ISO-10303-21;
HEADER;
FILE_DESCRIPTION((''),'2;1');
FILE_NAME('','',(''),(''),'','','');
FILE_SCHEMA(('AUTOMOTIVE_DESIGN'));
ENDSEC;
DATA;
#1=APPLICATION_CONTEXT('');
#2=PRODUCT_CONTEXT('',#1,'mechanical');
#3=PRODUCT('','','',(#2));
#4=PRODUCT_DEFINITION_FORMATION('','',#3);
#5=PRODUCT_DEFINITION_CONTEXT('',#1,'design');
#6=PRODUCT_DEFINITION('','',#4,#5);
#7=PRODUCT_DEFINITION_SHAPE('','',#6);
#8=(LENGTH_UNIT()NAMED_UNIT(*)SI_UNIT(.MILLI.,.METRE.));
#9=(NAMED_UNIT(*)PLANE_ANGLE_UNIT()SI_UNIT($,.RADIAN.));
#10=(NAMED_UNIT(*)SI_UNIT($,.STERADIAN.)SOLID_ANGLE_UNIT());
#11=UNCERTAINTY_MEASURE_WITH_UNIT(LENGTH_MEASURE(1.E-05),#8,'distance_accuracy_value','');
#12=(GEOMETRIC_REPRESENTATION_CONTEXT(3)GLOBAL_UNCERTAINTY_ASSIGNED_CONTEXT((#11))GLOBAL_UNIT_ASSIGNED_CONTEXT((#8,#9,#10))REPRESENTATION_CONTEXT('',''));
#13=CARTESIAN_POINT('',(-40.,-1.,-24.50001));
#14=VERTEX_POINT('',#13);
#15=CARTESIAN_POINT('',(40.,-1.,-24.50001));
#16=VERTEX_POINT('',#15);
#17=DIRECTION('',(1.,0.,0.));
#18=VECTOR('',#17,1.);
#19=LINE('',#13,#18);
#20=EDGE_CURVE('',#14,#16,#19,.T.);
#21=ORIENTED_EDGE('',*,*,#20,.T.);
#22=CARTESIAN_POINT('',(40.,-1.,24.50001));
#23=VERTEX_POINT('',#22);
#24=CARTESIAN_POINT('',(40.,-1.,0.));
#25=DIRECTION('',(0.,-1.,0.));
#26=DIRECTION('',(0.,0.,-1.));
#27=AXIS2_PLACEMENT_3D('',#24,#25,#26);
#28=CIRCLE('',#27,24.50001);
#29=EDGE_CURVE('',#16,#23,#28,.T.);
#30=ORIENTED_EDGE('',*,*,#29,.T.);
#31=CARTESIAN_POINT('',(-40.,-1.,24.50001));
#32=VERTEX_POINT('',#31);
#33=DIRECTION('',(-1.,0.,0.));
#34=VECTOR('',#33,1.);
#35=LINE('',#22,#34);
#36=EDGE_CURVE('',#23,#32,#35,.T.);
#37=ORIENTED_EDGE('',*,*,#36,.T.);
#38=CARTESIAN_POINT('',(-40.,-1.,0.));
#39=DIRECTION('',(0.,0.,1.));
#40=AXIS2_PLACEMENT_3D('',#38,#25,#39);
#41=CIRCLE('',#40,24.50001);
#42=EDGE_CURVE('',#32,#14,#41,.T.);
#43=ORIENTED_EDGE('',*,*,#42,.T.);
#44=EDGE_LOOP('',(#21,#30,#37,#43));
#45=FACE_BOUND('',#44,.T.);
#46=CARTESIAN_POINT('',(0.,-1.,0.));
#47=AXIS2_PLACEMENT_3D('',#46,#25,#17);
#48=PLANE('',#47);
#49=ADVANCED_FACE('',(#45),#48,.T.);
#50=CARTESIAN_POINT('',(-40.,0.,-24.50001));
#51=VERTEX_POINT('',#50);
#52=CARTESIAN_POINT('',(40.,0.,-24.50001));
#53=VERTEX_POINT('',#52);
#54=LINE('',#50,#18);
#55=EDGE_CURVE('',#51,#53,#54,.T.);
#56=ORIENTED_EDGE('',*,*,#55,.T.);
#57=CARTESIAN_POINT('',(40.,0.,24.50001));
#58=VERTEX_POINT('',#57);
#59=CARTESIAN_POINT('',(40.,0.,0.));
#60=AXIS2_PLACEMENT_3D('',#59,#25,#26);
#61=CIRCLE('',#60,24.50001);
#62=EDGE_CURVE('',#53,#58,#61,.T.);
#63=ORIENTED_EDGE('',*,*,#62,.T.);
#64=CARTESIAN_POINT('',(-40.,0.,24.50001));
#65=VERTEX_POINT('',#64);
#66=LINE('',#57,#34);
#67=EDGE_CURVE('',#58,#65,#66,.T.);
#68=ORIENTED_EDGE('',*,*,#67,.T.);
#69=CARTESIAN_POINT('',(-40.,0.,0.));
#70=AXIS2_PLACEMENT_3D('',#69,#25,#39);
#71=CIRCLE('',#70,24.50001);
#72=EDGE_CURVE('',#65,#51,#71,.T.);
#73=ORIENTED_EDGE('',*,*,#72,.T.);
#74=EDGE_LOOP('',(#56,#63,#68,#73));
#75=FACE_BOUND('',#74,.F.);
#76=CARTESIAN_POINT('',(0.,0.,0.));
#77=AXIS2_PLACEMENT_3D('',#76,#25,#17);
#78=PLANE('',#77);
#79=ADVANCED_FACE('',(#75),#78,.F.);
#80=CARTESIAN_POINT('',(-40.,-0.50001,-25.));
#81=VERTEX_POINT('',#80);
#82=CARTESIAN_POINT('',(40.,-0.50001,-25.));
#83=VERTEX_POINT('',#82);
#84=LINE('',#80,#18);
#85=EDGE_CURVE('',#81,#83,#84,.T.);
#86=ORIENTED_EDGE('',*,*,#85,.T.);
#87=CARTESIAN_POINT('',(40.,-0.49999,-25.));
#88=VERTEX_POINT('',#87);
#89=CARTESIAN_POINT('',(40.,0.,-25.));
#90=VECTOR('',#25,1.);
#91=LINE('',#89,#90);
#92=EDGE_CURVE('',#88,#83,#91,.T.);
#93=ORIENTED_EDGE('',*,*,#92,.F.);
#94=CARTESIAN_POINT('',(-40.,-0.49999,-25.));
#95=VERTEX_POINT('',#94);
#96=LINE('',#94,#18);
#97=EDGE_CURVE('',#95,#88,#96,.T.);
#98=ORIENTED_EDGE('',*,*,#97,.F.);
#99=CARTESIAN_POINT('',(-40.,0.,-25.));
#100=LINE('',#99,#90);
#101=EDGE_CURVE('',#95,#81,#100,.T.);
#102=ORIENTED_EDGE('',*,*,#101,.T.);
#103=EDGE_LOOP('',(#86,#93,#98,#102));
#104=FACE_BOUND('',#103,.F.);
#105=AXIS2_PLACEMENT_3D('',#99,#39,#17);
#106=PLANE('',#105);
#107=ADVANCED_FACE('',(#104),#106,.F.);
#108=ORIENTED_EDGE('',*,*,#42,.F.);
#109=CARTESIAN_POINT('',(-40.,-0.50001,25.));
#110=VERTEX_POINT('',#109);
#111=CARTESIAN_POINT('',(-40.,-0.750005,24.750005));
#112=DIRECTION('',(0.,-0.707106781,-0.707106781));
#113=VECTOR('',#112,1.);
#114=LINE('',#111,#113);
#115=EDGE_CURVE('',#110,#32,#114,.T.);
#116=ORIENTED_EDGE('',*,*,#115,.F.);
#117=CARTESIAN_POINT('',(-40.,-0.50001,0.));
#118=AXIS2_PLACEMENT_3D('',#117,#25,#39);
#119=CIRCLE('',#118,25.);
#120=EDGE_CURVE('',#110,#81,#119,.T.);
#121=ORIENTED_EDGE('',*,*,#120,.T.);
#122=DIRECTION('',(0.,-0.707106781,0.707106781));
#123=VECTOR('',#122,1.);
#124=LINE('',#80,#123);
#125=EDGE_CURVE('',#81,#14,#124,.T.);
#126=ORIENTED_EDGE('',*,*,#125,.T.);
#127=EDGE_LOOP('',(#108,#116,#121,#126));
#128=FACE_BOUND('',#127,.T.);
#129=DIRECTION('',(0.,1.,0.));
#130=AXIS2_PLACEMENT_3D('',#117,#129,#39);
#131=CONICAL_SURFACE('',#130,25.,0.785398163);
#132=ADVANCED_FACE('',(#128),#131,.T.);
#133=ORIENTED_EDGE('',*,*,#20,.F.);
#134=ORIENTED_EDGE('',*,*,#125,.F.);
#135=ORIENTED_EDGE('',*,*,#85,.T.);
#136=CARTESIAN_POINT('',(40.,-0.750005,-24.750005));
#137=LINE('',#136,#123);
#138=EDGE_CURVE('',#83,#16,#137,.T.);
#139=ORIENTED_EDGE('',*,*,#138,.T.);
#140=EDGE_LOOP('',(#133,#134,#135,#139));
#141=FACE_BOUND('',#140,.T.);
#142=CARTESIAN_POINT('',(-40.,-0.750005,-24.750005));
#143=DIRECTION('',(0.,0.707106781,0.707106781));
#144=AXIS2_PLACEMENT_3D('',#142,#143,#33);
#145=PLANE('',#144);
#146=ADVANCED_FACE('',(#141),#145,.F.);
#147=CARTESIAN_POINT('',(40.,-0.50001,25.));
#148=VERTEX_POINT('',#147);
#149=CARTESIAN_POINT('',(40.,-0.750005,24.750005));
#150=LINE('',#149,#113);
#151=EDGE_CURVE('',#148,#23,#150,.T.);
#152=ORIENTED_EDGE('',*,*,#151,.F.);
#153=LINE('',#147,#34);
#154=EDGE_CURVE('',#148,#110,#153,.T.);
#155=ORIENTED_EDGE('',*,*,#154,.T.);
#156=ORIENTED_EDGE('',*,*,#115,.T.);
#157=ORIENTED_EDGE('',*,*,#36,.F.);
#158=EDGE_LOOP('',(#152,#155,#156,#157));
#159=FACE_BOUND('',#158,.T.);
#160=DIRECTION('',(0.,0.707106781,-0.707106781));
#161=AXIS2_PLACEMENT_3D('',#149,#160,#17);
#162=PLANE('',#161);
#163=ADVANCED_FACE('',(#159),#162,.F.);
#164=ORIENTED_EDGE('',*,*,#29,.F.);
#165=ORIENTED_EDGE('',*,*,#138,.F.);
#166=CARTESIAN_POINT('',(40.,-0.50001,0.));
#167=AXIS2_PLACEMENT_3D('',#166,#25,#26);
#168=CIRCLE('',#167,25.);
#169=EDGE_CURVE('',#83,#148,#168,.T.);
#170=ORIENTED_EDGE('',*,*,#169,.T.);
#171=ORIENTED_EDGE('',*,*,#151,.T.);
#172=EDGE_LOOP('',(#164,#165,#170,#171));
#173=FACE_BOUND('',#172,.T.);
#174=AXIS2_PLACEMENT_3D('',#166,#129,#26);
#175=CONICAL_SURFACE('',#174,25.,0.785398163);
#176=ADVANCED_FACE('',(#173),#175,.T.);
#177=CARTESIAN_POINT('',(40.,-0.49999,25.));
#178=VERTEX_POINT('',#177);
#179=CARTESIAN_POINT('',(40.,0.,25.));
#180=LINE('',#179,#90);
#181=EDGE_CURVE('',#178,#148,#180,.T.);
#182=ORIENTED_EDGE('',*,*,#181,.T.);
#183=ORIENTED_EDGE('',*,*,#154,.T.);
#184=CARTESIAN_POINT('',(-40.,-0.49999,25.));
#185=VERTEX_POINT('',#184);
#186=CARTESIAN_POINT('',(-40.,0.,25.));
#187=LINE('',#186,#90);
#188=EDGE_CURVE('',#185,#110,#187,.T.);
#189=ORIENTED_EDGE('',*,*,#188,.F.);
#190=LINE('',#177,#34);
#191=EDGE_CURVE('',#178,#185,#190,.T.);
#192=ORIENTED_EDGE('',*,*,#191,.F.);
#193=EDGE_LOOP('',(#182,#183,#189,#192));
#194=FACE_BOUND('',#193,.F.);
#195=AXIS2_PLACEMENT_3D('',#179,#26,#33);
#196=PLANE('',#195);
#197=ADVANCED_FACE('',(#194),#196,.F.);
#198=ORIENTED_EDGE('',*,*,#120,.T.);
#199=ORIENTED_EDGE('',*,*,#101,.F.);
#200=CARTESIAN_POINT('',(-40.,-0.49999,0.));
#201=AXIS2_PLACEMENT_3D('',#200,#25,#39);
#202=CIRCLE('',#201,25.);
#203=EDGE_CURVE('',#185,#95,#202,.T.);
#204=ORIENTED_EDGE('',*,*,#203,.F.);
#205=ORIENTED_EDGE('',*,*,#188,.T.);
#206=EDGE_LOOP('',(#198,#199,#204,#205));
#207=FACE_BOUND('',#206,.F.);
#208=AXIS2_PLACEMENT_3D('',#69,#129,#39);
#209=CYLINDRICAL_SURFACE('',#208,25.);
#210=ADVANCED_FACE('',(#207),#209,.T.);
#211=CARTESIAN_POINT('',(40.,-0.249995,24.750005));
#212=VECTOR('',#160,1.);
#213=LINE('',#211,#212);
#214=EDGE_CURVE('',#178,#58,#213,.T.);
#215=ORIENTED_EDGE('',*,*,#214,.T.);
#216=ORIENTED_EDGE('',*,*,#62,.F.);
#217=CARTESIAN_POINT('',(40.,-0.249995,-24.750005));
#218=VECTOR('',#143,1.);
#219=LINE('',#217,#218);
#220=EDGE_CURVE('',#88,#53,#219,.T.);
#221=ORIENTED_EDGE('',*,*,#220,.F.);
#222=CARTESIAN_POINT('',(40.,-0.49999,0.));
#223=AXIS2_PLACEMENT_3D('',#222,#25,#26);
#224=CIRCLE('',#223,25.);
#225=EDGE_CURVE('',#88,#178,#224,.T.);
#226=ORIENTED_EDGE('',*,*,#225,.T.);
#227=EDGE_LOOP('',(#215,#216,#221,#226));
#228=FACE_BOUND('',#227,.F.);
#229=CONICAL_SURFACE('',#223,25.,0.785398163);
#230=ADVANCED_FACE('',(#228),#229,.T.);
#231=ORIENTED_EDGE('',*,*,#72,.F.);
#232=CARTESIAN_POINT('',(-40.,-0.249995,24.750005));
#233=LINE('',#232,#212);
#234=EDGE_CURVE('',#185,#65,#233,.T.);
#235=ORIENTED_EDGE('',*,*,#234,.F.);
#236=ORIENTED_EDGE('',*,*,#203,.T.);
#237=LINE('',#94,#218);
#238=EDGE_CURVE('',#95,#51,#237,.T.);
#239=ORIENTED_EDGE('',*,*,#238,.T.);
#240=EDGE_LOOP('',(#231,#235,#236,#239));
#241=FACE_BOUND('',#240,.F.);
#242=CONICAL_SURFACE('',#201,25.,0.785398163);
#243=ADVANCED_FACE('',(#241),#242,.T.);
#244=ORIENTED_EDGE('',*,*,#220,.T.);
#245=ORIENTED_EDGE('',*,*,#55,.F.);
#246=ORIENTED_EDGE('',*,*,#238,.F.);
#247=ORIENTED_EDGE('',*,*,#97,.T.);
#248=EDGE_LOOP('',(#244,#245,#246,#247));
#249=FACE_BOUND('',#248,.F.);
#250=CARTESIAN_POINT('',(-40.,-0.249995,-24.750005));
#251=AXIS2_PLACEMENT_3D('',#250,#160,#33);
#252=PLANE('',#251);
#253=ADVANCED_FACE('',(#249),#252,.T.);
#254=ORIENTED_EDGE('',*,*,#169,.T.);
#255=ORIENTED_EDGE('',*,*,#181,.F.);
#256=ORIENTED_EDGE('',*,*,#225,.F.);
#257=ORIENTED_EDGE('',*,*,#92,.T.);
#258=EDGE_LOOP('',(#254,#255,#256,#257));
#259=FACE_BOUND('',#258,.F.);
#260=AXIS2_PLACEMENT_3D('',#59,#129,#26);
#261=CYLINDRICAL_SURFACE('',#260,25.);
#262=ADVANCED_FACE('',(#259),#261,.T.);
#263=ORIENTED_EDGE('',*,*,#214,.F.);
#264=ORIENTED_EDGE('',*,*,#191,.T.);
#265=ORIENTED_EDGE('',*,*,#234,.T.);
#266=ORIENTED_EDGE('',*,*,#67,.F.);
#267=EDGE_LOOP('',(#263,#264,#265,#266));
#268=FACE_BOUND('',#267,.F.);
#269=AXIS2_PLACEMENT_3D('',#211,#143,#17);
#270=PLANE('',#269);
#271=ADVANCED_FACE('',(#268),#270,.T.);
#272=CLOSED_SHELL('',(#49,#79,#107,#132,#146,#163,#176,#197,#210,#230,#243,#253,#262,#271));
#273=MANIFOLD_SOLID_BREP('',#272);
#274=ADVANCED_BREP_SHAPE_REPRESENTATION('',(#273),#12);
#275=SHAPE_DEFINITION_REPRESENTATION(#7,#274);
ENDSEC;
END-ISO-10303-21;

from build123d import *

# Parameters (mm, degrees)
F1_DEPTH = 1
F2_SIZE  = 0.49999


# Not quite as in the source:
# - a fillet or chamfer is up to 0.001 mm smaller than in the source, because OpenCascade refuses the exact size


with BuildPart() as f1:
    # F0 (on Front) → F1 (new body)
    with BuildSketch(Plane.XZ):
        with BuildLine():
            ThreePointArc((40, -25), (65, 0), (40, 25))
            Line((40, 25), (-40, 25))
            ThreePointArc((-40, 25), (-65, 0), (-40, -25))
            Line((-40, -25), (40, -25))
        make_face()
    extrude(amount=F1_DEPTH)

    # F2 (size 0.5 in the source; OpenCascade refuses exactly that, so slightly less here)
    f2_edges = [f1.edges().sort_by_distance(p)[0] for p in [
        (0, -1, 25),
        (0, 0, 25),
    ]]
    chamfer(f2_edges, length=F2_SIZE)


solid = f1.part
